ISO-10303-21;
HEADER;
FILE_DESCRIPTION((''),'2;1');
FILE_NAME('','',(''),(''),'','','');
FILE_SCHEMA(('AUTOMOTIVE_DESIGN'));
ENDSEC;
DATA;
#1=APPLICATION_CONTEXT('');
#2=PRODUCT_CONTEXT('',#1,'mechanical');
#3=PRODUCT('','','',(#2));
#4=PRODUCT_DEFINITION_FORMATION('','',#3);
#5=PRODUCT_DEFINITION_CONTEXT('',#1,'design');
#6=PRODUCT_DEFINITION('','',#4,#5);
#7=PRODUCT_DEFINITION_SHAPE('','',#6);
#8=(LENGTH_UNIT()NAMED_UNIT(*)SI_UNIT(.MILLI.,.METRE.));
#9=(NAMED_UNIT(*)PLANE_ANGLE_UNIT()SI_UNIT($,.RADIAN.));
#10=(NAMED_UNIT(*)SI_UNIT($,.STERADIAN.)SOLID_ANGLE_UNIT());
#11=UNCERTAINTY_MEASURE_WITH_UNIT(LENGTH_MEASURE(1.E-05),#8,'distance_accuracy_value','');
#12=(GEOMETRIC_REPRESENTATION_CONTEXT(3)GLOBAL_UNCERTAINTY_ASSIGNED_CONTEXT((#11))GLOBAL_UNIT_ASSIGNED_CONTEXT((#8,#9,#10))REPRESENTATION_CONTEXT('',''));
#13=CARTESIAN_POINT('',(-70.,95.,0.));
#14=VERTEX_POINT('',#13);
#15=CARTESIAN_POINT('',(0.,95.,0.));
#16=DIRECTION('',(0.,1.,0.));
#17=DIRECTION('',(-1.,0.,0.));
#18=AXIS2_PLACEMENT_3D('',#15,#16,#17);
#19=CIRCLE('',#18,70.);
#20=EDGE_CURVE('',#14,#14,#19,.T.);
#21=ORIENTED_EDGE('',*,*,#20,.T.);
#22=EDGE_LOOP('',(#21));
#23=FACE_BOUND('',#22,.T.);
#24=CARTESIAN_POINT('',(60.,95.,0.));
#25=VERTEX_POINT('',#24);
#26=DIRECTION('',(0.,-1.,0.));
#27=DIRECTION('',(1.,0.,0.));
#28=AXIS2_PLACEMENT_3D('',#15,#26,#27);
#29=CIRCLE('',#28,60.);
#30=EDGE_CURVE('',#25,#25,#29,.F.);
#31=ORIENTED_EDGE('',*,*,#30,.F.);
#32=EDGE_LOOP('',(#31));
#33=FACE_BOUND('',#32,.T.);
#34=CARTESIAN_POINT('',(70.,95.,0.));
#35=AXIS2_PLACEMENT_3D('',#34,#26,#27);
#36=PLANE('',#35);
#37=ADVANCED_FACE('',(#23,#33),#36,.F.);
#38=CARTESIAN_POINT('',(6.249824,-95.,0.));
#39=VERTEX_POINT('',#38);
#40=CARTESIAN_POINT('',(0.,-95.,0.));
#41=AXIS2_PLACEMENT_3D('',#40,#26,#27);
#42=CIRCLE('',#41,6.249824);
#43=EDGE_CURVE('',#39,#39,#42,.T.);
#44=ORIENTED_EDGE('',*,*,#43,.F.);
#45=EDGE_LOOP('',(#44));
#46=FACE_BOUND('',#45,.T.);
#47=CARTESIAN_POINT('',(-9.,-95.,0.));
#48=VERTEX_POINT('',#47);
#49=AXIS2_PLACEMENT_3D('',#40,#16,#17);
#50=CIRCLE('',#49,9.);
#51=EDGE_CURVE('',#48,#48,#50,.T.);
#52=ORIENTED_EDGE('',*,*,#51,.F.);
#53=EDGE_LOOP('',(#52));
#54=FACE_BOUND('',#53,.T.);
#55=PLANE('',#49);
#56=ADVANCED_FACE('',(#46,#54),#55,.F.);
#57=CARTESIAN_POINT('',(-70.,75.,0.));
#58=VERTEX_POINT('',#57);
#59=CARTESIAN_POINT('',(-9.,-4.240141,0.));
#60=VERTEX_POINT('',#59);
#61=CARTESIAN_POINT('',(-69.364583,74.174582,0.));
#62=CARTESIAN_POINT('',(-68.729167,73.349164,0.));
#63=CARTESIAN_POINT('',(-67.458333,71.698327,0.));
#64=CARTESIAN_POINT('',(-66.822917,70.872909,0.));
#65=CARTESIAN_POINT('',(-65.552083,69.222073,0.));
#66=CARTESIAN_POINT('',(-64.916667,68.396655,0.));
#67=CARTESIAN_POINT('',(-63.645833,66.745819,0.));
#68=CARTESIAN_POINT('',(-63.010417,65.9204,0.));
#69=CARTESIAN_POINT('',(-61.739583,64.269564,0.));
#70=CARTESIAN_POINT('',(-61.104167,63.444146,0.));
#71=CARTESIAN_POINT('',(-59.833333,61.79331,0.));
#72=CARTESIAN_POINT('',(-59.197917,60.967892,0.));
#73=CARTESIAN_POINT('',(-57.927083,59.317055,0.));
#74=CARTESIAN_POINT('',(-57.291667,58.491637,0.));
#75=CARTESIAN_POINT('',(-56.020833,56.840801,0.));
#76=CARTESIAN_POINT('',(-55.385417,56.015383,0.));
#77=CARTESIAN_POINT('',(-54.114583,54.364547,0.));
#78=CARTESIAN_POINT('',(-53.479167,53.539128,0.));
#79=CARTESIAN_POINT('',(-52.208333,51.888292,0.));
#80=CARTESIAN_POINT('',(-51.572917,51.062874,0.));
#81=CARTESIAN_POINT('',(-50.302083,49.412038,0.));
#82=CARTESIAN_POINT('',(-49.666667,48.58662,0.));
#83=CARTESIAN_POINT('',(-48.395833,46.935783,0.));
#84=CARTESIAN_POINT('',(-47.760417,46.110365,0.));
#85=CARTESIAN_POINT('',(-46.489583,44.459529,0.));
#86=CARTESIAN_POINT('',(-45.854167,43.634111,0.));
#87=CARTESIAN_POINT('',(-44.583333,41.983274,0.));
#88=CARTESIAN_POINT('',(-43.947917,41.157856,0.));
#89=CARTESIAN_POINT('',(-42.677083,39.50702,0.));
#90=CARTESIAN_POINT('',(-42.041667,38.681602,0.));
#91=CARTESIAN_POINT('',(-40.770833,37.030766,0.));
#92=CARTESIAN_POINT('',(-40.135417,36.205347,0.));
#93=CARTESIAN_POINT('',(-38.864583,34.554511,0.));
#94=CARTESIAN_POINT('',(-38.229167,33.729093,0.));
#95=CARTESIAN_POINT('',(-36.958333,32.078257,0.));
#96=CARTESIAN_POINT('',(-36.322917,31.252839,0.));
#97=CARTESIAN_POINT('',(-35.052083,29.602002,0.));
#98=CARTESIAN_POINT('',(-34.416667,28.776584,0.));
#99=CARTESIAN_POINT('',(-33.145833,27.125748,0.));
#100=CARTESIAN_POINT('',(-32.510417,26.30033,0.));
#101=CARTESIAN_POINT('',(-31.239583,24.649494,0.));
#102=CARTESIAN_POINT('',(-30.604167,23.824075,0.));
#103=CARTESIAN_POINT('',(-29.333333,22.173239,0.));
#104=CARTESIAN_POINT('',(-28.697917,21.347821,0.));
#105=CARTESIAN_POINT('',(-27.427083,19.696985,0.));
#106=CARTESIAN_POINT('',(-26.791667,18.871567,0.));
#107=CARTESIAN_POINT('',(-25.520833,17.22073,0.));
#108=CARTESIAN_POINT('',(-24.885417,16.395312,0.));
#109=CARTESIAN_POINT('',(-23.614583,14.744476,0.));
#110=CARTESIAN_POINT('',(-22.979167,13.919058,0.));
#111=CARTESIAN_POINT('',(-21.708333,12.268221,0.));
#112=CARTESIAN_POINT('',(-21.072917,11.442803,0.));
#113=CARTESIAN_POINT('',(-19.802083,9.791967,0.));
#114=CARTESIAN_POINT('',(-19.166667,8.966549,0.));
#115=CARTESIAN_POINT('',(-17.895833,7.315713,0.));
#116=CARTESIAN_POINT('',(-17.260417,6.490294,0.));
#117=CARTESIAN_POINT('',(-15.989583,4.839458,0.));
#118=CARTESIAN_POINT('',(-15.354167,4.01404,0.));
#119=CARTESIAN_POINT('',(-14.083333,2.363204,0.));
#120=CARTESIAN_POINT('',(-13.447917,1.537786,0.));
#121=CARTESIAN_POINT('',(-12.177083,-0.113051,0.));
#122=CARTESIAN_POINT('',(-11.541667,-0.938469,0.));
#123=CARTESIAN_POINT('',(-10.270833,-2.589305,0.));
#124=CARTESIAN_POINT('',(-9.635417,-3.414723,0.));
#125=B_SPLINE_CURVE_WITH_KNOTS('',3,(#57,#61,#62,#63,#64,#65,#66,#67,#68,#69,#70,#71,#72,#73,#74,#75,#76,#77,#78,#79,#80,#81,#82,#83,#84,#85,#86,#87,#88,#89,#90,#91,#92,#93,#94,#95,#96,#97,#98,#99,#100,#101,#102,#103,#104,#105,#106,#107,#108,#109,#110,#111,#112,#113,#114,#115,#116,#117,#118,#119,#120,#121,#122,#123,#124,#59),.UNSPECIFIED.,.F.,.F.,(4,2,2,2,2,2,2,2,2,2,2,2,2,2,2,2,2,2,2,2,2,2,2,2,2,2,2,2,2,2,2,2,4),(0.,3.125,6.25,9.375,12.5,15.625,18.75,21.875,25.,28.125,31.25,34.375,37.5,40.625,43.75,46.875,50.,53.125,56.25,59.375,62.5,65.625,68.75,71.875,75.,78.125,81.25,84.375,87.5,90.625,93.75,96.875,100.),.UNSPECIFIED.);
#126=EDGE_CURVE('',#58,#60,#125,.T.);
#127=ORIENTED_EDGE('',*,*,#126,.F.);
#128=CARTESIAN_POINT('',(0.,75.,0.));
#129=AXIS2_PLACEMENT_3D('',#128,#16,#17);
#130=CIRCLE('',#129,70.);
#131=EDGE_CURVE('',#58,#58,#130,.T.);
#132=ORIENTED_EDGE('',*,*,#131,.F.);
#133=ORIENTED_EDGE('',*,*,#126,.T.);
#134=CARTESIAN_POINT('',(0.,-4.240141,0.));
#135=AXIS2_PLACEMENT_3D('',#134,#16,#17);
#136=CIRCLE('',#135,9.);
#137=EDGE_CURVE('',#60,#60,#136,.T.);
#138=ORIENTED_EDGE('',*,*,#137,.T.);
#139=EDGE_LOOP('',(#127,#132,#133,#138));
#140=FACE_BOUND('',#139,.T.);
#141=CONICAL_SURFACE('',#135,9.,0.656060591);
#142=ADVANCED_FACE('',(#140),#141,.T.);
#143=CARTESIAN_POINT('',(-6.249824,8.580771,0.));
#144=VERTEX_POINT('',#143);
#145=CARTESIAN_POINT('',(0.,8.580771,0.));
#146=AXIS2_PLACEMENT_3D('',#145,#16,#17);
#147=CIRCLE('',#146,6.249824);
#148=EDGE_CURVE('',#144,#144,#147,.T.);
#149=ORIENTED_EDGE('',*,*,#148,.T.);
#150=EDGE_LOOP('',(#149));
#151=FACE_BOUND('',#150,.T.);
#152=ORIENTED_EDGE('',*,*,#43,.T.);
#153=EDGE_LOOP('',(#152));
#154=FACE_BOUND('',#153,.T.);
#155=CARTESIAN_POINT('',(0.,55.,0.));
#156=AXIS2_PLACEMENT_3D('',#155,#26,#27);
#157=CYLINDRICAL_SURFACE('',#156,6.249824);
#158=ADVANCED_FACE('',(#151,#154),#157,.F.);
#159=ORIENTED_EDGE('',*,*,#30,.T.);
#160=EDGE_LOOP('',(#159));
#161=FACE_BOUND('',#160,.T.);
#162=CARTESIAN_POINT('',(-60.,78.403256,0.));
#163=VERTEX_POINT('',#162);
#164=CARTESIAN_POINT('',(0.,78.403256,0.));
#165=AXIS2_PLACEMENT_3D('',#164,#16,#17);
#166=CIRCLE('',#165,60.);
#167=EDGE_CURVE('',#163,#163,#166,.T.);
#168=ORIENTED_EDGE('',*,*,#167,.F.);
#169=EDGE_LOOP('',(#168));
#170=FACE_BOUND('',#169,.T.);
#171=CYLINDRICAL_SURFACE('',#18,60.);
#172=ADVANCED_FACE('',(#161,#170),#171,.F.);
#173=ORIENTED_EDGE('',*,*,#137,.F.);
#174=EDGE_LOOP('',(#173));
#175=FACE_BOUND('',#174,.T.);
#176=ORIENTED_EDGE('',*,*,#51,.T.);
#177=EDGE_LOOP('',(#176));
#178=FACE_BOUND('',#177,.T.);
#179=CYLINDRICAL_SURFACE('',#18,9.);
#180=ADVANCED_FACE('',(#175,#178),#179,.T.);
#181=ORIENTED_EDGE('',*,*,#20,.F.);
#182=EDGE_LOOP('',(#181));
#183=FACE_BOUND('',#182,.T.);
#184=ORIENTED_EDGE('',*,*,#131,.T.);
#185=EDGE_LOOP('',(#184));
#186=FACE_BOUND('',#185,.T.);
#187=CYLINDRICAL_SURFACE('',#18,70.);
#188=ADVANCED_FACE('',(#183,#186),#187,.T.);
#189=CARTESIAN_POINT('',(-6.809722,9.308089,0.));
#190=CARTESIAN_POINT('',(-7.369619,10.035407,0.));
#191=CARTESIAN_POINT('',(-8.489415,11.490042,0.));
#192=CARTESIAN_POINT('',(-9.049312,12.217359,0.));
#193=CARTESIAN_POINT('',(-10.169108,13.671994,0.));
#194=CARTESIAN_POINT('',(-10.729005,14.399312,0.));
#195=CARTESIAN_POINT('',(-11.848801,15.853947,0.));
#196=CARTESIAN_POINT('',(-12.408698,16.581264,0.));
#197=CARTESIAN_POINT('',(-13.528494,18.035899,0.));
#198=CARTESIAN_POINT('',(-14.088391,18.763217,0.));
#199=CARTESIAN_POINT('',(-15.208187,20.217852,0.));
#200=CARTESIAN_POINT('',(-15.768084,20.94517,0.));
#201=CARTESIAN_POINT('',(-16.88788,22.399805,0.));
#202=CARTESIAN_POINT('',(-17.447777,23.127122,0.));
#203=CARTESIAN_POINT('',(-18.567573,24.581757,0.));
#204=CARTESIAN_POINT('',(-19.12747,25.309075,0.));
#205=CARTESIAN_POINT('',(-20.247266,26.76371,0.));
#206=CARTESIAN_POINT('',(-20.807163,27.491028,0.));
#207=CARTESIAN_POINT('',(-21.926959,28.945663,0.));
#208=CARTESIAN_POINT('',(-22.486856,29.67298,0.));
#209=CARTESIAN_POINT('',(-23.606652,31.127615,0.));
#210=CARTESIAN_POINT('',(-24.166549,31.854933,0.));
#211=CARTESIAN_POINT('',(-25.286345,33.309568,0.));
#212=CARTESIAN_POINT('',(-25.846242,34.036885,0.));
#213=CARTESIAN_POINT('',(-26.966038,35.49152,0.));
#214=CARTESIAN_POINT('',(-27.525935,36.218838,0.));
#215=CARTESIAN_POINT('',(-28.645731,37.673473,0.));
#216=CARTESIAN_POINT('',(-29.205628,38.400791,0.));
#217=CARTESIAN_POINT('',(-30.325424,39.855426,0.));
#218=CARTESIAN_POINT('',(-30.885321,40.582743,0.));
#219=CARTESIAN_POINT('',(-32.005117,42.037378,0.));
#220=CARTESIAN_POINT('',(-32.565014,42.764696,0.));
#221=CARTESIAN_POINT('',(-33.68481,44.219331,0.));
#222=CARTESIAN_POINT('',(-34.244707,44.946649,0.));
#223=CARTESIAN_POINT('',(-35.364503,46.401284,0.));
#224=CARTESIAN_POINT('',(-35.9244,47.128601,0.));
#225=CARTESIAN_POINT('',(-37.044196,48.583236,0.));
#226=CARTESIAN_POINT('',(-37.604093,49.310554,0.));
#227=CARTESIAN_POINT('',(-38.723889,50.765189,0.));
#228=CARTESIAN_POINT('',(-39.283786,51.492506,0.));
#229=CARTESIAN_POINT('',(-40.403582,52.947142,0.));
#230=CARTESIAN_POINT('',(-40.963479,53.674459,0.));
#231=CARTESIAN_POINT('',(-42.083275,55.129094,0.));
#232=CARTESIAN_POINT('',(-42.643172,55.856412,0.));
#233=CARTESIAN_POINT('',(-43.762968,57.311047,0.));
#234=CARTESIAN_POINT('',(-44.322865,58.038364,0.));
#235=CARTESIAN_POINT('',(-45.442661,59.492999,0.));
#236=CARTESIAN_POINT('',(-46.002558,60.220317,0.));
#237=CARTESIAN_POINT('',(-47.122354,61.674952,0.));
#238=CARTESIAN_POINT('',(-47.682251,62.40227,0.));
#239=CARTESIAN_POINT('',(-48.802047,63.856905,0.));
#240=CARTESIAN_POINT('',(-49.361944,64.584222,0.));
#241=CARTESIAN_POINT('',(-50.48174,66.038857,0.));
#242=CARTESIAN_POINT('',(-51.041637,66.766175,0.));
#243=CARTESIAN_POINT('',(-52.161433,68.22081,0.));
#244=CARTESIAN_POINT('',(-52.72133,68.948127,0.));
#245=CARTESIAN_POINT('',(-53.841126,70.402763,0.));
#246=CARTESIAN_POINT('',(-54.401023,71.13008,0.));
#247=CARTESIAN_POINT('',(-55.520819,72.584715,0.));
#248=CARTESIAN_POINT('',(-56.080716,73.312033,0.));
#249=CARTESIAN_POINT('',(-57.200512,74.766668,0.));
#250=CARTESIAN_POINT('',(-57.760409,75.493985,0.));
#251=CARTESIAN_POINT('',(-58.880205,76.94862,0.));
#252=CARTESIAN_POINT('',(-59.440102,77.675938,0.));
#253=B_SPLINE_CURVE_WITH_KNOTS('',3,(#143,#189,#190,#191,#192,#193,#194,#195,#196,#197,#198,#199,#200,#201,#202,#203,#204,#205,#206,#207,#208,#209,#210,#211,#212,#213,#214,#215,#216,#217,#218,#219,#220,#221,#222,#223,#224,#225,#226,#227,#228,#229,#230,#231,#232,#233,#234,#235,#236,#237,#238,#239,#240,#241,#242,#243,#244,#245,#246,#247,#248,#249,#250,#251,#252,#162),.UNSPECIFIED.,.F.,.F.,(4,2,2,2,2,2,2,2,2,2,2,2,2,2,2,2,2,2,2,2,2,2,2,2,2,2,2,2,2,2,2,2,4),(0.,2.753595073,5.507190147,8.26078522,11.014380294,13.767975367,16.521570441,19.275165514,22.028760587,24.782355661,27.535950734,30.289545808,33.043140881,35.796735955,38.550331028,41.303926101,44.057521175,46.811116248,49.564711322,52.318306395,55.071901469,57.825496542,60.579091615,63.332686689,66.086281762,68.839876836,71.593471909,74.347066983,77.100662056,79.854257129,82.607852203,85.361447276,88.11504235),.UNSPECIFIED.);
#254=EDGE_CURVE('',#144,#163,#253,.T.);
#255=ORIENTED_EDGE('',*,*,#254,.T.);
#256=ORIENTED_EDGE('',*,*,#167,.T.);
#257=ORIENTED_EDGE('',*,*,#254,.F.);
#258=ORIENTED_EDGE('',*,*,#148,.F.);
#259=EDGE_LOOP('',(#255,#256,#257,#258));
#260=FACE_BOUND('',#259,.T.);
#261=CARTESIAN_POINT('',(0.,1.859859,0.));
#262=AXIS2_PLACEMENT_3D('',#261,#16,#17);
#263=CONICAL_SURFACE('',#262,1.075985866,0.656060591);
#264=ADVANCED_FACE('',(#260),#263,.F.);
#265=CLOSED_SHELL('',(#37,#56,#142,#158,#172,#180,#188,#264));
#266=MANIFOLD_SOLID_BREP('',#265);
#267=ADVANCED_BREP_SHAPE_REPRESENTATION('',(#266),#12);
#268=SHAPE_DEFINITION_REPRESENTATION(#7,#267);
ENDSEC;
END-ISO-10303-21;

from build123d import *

# Parameters (mm, degrees)
CROQUIS2_R            = 6.249824167
CORTAR_EXTRUIR1_DEPTH = 150


# Read off the part's stored shape, not the designer's step: Vaciado4
with BuildPart() as part:
    # Croquis1 → Revolución2 (revolve)
    with BuildSketch(Plane.XY, mode=Mode.PRIVATE) as revoluci_n2_sk:
        Polygon((0, 95), (0, -95), (9, -95), (9, -4.240141343), (70, 75), (70, 95), align=None)
    revolve(revoluci_n2_sk.sketch.rotate(Axis((0, 95, 0), (0, -1, 0)), 180), axis=Axis((0, 95, 0), (0, -1, 0)))

    # Vaciado4 outline → Vaciado4 (revolve, cut)
    with BuildSketch(Plane.XY):
        Polygon((0, 95), (0, 0.462132886), (60, 78.403255518), (60, 95), align=None)
    revolve(axis=Axis((0, 0, 0), (0, 1, 0)), mode=Mode.SUBTRACT)

    # Croquis2 → Cortar-Extruir1 (cut)
    with BuildSketch(Plane.XZ.offset(95)):
        Circle(CROQUIS2_R)
    extrude(amount=-CORTAR_EXTRUIR1_DEPTH, mode=Mode.SUBTRACT)


solid = part.part
